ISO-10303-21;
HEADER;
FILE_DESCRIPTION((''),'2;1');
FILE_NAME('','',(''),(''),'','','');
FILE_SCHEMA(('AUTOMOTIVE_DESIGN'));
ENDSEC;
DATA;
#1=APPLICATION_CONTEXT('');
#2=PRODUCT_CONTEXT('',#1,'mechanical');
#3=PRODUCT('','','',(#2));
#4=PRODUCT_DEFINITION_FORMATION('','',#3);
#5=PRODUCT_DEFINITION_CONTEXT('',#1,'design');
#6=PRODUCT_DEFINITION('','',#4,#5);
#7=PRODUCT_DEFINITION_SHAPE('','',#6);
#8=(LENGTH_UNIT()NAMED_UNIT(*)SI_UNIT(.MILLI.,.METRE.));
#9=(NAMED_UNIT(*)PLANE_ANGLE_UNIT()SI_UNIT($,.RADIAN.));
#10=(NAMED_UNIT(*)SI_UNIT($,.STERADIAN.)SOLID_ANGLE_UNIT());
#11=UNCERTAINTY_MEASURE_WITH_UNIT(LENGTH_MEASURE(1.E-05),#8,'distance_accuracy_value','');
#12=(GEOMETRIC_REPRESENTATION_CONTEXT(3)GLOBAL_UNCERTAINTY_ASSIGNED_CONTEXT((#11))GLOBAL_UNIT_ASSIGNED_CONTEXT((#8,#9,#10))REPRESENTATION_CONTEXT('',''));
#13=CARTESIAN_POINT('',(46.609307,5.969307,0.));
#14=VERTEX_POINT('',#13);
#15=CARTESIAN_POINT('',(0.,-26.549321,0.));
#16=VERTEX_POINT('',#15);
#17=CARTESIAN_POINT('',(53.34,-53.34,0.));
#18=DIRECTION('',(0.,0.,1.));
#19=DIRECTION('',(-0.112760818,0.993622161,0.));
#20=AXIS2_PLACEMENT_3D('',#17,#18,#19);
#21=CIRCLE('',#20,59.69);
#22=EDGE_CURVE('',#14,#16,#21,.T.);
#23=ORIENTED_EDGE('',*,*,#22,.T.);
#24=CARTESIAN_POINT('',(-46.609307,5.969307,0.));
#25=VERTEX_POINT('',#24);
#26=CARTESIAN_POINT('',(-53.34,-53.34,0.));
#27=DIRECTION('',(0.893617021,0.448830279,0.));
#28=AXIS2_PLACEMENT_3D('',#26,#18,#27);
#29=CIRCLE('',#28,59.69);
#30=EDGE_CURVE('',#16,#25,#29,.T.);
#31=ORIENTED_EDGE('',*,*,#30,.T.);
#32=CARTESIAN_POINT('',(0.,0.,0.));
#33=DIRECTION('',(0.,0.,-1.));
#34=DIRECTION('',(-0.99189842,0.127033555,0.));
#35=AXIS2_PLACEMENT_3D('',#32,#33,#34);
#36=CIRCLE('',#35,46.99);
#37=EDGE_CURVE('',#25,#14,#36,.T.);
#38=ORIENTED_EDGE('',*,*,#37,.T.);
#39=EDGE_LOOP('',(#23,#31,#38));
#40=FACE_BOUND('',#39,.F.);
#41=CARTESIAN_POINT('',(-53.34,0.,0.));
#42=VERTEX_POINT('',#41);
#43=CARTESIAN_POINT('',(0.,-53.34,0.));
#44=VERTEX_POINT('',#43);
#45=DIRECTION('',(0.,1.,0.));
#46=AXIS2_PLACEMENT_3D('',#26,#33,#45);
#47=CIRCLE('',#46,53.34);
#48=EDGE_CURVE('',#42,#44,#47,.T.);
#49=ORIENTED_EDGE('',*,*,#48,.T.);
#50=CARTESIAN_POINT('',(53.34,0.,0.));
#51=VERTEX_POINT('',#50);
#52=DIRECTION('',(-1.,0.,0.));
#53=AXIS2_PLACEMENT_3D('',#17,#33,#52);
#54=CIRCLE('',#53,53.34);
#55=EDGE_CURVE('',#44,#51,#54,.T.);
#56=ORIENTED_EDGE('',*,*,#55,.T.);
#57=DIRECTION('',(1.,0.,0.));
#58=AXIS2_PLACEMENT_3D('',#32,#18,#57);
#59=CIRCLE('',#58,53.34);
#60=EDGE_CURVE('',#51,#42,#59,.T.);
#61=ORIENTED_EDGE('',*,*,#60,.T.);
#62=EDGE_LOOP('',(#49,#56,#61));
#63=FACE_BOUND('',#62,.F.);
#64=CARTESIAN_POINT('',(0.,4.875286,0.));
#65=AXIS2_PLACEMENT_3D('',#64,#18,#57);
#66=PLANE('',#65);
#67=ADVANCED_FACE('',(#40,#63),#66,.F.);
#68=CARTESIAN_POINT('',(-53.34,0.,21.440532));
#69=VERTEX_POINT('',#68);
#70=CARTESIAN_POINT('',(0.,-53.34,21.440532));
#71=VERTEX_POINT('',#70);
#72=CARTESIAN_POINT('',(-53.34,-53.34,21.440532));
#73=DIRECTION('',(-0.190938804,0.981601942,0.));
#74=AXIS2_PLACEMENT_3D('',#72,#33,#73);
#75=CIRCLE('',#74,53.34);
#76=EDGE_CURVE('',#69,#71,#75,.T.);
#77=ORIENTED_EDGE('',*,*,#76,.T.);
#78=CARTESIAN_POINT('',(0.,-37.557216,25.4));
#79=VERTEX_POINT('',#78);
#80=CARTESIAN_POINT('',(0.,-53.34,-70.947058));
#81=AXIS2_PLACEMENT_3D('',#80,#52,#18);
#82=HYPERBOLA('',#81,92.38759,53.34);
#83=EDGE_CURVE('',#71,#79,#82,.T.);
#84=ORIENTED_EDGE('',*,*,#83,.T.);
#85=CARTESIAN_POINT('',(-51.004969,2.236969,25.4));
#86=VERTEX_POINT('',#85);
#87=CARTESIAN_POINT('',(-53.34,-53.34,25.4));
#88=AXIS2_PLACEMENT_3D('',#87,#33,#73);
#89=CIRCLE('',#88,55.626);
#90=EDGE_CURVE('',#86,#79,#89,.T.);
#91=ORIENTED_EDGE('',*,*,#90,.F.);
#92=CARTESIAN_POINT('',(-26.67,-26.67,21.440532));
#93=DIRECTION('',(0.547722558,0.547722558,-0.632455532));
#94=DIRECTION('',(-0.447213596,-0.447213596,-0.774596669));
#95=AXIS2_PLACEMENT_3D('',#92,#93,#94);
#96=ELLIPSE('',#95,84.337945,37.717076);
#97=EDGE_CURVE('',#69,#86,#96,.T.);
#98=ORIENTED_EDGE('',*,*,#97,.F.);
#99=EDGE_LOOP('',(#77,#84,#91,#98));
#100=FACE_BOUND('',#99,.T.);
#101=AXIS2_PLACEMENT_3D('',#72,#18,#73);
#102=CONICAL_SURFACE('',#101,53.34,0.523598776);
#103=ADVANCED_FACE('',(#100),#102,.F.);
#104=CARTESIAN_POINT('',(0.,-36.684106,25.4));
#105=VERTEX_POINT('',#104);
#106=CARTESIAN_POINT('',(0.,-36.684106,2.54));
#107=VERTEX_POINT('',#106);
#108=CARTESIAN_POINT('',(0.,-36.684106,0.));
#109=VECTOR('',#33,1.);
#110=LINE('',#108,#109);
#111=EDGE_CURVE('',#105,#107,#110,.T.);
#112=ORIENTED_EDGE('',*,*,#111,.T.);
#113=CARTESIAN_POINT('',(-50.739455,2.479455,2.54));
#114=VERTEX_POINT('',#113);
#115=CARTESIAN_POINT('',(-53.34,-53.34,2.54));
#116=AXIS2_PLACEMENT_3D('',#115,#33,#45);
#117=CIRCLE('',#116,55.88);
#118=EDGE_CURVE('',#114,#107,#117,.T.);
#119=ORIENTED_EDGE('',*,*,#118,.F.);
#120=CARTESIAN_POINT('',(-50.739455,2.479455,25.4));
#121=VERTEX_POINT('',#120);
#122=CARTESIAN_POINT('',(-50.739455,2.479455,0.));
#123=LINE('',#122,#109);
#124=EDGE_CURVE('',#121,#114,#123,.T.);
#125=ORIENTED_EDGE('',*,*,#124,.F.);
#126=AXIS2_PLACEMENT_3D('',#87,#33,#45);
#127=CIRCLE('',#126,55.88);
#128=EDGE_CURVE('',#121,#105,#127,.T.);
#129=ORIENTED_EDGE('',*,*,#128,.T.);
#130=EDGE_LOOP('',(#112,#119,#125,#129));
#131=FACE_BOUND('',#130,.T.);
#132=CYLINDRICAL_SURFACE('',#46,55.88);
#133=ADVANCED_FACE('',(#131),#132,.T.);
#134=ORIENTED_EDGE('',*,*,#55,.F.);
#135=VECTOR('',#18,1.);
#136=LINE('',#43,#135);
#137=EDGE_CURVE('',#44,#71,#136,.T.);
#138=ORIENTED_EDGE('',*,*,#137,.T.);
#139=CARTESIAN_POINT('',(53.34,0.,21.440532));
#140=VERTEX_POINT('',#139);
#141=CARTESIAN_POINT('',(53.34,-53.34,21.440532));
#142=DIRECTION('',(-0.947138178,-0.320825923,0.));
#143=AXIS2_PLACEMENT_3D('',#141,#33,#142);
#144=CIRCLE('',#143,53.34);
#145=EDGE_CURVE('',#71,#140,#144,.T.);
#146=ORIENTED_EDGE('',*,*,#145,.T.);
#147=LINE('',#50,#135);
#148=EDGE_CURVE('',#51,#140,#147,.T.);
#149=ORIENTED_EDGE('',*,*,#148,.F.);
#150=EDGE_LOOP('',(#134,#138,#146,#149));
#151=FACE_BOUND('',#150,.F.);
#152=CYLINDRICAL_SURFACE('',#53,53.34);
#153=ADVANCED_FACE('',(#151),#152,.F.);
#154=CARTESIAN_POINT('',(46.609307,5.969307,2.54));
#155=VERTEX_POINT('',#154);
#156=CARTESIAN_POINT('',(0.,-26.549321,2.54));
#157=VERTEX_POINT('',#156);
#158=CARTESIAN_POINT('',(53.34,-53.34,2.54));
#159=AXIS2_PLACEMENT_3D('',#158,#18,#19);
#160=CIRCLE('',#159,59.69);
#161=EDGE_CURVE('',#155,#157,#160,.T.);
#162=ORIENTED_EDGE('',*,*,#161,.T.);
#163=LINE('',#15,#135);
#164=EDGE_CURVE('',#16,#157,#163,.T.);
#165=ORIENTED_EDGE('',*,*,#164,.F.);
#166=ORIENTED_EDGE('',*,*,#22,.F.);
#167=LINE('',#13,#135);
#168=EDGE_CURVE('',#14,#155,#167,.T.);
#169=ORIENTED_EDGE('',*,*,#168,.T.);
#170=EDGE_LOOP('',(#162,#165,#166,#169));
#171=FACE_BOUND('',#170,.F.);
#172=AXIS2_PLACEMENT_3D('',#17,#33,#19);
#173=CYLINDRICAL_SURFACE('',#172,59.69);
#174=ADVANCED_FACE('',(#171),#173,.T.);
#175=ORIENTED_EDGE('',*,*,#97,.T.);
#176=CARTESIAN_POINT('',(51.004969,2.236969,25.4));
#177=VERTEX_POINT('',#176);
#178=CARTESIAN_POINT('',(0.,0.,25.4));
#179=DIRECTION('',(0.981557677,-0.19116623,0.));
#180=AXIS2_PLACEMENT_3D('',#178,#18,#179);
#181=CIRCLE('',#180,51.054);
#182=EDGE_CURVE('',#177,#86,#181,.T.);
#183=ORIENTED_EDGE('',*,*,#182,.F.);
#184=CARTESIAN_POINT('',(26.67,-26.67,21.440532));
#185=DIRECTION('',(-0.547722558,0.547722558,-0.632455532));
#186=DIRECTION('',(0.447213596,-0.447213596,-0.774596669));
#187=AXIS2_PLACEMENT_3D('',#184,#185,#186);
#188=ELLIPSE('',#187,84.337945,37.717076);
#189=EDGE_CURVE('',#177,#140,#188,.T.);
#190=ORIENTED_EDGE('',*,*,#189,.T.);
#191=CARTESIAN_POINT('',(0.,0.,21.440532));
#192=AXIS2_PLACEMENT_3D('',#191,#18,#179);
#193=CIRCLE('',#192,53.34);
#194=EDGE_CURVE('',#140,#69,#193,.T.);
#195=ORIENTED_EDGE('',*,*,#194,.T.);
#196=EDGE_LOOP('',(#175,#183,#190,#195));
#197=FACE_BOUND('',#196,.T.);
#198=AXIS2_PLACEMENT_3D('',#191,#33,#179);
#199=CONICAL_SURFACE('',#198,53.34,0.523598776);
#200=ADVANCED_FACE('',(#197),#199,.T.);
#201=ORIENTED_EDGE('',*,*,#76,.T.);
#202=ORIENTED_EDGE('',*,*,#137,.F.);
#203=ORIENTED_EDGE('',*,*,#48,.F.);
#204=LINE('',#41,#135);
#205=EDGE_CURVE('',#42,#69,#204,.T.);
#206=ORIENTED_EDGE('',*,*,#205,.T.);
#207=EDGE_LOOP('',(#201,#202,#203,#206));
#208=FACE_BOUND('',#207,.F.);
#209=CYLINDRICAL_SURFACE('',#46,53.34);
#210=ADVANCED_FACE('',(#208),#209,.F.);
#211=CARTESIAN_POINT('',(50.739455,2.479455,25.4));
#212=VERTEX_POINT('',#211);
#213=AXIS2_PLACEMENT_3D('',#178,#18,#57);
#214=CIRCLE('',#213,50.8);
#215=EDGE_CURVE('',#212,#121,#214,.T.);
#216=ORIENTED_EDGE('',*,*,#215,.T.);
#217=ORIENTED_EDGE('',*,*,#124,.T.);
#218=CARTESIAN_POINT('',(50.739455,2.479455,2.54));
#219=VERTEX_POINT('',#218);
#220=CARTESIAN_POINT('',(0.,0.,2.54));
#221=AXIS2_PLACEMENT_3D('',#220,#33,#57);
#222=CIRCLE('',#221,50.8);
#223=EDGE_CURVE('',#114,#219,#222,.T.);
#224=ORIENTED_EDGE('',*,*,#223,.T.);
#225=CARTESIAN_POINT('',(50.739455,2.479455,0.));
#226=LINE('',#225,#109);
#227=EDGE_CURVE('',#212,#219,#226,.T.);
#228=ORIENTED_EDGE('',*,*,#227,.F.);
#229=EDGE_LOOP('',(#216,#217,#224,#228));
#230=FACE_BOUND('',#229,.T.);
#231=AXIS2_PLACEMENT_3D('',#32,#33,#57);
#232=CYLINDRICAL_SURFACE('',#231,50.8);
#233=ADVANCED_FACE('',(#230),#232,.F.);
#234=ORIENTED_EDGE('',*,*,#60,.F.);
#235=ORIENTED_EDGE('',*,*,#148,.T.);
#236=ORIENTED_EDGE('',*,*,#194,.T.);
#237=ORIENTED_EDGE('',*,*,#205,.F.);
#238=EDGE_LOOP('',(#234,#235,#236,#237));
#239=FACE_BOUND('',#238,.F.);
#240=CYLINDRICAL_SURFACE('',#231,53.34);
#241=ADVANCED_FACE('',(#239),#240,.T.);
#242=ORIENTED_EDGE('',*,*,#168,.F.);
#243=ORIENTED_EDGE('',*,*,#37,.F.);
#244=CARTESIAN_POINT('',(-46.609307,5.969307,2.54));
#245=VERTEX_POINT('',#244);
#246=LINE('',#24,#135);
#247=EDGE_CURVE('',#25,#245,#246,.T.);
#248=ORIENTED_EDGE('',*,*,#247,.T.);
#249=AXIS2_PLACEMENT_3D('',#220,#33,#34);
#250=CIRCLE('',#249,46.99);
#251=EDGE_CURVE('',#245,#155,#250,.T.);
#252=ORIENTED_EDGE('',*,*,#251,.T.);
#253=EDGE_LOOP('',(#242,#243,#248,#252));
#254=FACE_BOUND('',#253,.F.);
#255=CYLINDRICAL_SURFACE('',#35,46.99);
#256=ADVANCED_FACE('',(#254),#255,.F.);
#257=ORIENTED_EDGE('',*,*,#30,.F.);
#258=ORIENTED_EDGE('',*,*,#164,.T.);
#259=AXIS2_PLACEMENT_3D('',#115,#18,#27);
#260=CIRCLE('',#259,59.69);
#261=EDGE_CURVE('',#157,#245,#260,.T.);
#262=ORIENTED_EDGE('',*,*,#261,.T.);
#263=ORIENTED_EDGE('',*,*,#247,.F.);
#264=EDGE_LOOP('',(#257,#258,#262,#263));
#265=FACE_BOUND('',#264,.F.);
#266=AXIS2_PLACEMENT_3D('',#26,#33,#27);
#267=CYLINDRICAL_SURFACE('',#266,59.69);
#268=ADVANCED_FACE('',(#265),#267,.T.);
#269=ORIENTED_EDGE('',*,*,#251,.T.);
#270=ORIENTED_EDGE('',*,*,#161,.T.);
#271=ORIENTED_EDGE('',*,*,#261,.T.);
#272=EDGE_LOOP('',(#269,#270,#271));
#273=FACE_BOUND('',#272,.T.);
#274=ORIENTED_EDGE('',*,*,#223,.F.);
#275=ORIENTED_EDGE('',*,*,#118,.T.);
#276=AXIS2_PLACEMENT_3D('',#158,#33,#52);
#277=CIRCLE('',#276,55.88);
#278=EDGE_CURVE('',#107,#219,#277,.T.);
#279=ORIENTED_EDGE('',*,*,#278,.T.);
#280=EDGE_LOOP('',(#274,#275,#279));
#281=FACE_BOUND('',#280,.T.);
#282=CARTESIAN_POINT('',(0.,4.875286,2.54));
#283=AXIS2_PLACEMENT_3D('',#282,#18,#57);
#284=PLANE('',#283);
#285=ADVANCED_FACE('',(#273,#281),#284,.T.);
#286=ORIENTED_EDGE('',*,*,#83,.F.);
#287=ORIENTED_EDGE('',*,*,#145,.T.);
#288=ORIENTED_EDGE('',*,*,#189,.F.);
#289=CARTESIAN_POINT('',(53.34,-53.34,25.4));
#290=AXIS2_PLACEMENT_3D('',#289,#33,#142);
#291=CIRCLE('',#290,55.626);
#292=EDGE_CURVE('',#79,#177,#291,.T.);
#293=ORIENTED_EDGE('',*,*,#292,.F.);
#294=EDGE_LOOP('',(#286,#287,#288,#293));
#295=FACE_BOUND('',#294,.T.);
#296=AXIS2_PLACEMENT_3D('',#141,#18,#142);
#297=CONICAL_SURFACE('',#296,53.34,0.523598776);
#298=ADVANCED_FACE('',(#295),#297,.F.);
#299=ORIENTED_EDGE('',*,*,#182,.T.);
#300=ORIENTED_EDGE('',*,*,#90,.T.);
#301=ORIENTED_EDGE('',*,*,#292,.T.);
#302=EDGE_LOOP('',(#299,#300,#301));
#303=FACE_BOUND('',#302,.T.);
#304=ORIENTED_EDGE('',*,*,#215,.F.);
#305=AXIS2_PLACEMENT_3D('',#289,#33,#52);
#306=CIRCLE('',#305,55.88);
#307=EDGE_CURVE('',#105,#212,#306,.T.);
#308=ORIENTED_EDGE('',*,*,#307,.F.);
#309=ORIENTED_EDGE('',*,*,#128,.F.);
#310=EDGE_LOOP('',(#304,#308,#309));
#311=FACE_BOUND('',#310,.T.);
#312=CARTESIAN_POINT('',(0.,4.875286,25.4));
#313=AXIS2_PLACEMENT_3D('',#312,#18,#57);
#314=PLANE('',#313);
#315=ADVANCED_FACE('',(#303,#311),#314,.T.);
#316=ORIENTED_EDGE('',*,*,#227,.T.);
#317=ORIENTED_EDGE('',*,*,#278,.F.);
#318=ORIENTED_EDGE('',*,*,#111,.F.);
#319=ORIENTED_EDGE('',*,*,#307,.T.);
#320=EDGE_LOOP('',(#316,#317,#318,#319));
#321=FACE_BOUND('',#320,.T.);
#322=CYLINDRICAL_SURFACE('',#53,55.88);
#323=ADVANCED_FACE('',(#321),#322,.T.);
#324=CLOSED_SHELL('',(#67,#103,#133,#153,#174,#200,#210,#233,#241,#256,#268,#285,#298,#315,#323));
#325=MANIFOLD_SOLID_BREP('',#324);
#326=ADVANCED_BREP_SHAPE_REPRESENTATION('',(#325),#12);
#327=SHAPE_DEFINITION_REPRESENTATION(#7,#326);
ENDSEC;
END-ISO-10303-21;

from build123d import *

# Parameters (mm, degrees)
F1_DEPTH    = 25.4
F2_T        = -2.54
F3_T2_ANGLE = 202.0417037701
F3_T4_ANGLE = 119.7204573229
F3_T6_ANGLE = 119.7204573229
F5_DEPTH    = 2.54


# Not quite as in the source:
# - a fillet or chamfer that OpenCascade refuses, or shapes differently, is made with other operations: its cross-section is extruded or revolved along the edge and cut away or added


with BuildPart() as f1:
    # F0 (on Top) → F1 (new body)
    with BuildSketch(Plane.XY):
        with BuildLine():
            ThreePointArc((-53.34, 0), (-15.6229242915, -15.6229242915), (0, -53.34))
            ThreePointArc((0, -53.34), (15.6229242915, -15.6229242915), (53.34, 0))
            ThreePointArc((53.34, 0), (0, 53.34), (-53.34, 0))
        make_face()
    extrude(amount=F1_DEPTH)

    # F2
    f2_openings = [f1.faces().sort_by_distance(p)[0] for p in [
        (0, 15.223138, 25.4),
    ]]
    offset(amount=F2_T, openings=f2_openings)

    # F3: chamfer of 2.286 x 3.9594681461 on 3 edges, made by hand

    # F3_s1 → F3_t2 (revolve, cut)
    with BuildSketch(Plane(origin=(0, 0, 0), x_dir=(0, 0, 1), z_dir=(-0.1911662303, -0.9815576766, 0))):
        Polygon((21.4405318539, -53.34), (25.4, -51.054), (25.4, -53.34), align=None)
    revolve(axis=Axis((0, 0, 25.4), (0, 0, 1)), revolution_arc=F3_T2_ANGLE, mode=Mode.SUBTRACT)

    # F3_s3 → F3_t4 (revolve, cut)
    with BuildSketch(Plane(origin=(-61.3926477335, -11.9419473665, 0), x_dir=(0, 0, 1), z_dir=(-0.9816019423, -0.190938804, 0))):
        Polygon((21.4405318539, 11.1660282003), (25.4, 13.4520282003), (25.4, 11.1660282003), align=None)
    revolve(axis=Axis((-53.34, -53.34, 25.4), (0, 0, -1)), revolution_arc=F3_T4_ANGLE, mode=Mode.SUBTRACT)

    # F3_s5 → F3_t6 (revolve, cut)
    with BuildSketch(Plane(origin=(21.6984854346, -64.0579906243, 0), x_dir=(0, 0, 1), z_dir=(0.3208259227, -0.9471381775, 0))):
        Polygon((21.4405318539, 19.9325043289), (25.4, 22.2185043289), (25.4, 19.9325043289), align=None)
    revolve(axis=Axis((53.34, -53.34, 25.4), (0, 0, -1)), revolution_arc=F3_T6_ANGLE, mode=Mode.SUBTRACT)

    # F4 (on face) → F5 (cut, through all)
    with BuildSketch(Plane(origin=(0, 0, 0), x_dir=(1, 0, 0), z_dir=(0, 0, -1))):
        with BuildLine():
            ThreePointArc((-46.6093067615, -5.9693067615), (0, -46.99), (46.6093067615, -5.9693067615))
            ThreePointArc((46.6093067615, -5.9693067615), (19.1861227863, 4.3868716907), (0, 26.5493206506))
            ThreePointArc((0, 26.5493206506), (-19.1861227863, 4.3868716907), (-46.6093067615, -5.9693067615))
        make_face()
    extrude(amount=-F5_DEPTH, mode=Mode.SUBTRACT)


solid = f1.part
